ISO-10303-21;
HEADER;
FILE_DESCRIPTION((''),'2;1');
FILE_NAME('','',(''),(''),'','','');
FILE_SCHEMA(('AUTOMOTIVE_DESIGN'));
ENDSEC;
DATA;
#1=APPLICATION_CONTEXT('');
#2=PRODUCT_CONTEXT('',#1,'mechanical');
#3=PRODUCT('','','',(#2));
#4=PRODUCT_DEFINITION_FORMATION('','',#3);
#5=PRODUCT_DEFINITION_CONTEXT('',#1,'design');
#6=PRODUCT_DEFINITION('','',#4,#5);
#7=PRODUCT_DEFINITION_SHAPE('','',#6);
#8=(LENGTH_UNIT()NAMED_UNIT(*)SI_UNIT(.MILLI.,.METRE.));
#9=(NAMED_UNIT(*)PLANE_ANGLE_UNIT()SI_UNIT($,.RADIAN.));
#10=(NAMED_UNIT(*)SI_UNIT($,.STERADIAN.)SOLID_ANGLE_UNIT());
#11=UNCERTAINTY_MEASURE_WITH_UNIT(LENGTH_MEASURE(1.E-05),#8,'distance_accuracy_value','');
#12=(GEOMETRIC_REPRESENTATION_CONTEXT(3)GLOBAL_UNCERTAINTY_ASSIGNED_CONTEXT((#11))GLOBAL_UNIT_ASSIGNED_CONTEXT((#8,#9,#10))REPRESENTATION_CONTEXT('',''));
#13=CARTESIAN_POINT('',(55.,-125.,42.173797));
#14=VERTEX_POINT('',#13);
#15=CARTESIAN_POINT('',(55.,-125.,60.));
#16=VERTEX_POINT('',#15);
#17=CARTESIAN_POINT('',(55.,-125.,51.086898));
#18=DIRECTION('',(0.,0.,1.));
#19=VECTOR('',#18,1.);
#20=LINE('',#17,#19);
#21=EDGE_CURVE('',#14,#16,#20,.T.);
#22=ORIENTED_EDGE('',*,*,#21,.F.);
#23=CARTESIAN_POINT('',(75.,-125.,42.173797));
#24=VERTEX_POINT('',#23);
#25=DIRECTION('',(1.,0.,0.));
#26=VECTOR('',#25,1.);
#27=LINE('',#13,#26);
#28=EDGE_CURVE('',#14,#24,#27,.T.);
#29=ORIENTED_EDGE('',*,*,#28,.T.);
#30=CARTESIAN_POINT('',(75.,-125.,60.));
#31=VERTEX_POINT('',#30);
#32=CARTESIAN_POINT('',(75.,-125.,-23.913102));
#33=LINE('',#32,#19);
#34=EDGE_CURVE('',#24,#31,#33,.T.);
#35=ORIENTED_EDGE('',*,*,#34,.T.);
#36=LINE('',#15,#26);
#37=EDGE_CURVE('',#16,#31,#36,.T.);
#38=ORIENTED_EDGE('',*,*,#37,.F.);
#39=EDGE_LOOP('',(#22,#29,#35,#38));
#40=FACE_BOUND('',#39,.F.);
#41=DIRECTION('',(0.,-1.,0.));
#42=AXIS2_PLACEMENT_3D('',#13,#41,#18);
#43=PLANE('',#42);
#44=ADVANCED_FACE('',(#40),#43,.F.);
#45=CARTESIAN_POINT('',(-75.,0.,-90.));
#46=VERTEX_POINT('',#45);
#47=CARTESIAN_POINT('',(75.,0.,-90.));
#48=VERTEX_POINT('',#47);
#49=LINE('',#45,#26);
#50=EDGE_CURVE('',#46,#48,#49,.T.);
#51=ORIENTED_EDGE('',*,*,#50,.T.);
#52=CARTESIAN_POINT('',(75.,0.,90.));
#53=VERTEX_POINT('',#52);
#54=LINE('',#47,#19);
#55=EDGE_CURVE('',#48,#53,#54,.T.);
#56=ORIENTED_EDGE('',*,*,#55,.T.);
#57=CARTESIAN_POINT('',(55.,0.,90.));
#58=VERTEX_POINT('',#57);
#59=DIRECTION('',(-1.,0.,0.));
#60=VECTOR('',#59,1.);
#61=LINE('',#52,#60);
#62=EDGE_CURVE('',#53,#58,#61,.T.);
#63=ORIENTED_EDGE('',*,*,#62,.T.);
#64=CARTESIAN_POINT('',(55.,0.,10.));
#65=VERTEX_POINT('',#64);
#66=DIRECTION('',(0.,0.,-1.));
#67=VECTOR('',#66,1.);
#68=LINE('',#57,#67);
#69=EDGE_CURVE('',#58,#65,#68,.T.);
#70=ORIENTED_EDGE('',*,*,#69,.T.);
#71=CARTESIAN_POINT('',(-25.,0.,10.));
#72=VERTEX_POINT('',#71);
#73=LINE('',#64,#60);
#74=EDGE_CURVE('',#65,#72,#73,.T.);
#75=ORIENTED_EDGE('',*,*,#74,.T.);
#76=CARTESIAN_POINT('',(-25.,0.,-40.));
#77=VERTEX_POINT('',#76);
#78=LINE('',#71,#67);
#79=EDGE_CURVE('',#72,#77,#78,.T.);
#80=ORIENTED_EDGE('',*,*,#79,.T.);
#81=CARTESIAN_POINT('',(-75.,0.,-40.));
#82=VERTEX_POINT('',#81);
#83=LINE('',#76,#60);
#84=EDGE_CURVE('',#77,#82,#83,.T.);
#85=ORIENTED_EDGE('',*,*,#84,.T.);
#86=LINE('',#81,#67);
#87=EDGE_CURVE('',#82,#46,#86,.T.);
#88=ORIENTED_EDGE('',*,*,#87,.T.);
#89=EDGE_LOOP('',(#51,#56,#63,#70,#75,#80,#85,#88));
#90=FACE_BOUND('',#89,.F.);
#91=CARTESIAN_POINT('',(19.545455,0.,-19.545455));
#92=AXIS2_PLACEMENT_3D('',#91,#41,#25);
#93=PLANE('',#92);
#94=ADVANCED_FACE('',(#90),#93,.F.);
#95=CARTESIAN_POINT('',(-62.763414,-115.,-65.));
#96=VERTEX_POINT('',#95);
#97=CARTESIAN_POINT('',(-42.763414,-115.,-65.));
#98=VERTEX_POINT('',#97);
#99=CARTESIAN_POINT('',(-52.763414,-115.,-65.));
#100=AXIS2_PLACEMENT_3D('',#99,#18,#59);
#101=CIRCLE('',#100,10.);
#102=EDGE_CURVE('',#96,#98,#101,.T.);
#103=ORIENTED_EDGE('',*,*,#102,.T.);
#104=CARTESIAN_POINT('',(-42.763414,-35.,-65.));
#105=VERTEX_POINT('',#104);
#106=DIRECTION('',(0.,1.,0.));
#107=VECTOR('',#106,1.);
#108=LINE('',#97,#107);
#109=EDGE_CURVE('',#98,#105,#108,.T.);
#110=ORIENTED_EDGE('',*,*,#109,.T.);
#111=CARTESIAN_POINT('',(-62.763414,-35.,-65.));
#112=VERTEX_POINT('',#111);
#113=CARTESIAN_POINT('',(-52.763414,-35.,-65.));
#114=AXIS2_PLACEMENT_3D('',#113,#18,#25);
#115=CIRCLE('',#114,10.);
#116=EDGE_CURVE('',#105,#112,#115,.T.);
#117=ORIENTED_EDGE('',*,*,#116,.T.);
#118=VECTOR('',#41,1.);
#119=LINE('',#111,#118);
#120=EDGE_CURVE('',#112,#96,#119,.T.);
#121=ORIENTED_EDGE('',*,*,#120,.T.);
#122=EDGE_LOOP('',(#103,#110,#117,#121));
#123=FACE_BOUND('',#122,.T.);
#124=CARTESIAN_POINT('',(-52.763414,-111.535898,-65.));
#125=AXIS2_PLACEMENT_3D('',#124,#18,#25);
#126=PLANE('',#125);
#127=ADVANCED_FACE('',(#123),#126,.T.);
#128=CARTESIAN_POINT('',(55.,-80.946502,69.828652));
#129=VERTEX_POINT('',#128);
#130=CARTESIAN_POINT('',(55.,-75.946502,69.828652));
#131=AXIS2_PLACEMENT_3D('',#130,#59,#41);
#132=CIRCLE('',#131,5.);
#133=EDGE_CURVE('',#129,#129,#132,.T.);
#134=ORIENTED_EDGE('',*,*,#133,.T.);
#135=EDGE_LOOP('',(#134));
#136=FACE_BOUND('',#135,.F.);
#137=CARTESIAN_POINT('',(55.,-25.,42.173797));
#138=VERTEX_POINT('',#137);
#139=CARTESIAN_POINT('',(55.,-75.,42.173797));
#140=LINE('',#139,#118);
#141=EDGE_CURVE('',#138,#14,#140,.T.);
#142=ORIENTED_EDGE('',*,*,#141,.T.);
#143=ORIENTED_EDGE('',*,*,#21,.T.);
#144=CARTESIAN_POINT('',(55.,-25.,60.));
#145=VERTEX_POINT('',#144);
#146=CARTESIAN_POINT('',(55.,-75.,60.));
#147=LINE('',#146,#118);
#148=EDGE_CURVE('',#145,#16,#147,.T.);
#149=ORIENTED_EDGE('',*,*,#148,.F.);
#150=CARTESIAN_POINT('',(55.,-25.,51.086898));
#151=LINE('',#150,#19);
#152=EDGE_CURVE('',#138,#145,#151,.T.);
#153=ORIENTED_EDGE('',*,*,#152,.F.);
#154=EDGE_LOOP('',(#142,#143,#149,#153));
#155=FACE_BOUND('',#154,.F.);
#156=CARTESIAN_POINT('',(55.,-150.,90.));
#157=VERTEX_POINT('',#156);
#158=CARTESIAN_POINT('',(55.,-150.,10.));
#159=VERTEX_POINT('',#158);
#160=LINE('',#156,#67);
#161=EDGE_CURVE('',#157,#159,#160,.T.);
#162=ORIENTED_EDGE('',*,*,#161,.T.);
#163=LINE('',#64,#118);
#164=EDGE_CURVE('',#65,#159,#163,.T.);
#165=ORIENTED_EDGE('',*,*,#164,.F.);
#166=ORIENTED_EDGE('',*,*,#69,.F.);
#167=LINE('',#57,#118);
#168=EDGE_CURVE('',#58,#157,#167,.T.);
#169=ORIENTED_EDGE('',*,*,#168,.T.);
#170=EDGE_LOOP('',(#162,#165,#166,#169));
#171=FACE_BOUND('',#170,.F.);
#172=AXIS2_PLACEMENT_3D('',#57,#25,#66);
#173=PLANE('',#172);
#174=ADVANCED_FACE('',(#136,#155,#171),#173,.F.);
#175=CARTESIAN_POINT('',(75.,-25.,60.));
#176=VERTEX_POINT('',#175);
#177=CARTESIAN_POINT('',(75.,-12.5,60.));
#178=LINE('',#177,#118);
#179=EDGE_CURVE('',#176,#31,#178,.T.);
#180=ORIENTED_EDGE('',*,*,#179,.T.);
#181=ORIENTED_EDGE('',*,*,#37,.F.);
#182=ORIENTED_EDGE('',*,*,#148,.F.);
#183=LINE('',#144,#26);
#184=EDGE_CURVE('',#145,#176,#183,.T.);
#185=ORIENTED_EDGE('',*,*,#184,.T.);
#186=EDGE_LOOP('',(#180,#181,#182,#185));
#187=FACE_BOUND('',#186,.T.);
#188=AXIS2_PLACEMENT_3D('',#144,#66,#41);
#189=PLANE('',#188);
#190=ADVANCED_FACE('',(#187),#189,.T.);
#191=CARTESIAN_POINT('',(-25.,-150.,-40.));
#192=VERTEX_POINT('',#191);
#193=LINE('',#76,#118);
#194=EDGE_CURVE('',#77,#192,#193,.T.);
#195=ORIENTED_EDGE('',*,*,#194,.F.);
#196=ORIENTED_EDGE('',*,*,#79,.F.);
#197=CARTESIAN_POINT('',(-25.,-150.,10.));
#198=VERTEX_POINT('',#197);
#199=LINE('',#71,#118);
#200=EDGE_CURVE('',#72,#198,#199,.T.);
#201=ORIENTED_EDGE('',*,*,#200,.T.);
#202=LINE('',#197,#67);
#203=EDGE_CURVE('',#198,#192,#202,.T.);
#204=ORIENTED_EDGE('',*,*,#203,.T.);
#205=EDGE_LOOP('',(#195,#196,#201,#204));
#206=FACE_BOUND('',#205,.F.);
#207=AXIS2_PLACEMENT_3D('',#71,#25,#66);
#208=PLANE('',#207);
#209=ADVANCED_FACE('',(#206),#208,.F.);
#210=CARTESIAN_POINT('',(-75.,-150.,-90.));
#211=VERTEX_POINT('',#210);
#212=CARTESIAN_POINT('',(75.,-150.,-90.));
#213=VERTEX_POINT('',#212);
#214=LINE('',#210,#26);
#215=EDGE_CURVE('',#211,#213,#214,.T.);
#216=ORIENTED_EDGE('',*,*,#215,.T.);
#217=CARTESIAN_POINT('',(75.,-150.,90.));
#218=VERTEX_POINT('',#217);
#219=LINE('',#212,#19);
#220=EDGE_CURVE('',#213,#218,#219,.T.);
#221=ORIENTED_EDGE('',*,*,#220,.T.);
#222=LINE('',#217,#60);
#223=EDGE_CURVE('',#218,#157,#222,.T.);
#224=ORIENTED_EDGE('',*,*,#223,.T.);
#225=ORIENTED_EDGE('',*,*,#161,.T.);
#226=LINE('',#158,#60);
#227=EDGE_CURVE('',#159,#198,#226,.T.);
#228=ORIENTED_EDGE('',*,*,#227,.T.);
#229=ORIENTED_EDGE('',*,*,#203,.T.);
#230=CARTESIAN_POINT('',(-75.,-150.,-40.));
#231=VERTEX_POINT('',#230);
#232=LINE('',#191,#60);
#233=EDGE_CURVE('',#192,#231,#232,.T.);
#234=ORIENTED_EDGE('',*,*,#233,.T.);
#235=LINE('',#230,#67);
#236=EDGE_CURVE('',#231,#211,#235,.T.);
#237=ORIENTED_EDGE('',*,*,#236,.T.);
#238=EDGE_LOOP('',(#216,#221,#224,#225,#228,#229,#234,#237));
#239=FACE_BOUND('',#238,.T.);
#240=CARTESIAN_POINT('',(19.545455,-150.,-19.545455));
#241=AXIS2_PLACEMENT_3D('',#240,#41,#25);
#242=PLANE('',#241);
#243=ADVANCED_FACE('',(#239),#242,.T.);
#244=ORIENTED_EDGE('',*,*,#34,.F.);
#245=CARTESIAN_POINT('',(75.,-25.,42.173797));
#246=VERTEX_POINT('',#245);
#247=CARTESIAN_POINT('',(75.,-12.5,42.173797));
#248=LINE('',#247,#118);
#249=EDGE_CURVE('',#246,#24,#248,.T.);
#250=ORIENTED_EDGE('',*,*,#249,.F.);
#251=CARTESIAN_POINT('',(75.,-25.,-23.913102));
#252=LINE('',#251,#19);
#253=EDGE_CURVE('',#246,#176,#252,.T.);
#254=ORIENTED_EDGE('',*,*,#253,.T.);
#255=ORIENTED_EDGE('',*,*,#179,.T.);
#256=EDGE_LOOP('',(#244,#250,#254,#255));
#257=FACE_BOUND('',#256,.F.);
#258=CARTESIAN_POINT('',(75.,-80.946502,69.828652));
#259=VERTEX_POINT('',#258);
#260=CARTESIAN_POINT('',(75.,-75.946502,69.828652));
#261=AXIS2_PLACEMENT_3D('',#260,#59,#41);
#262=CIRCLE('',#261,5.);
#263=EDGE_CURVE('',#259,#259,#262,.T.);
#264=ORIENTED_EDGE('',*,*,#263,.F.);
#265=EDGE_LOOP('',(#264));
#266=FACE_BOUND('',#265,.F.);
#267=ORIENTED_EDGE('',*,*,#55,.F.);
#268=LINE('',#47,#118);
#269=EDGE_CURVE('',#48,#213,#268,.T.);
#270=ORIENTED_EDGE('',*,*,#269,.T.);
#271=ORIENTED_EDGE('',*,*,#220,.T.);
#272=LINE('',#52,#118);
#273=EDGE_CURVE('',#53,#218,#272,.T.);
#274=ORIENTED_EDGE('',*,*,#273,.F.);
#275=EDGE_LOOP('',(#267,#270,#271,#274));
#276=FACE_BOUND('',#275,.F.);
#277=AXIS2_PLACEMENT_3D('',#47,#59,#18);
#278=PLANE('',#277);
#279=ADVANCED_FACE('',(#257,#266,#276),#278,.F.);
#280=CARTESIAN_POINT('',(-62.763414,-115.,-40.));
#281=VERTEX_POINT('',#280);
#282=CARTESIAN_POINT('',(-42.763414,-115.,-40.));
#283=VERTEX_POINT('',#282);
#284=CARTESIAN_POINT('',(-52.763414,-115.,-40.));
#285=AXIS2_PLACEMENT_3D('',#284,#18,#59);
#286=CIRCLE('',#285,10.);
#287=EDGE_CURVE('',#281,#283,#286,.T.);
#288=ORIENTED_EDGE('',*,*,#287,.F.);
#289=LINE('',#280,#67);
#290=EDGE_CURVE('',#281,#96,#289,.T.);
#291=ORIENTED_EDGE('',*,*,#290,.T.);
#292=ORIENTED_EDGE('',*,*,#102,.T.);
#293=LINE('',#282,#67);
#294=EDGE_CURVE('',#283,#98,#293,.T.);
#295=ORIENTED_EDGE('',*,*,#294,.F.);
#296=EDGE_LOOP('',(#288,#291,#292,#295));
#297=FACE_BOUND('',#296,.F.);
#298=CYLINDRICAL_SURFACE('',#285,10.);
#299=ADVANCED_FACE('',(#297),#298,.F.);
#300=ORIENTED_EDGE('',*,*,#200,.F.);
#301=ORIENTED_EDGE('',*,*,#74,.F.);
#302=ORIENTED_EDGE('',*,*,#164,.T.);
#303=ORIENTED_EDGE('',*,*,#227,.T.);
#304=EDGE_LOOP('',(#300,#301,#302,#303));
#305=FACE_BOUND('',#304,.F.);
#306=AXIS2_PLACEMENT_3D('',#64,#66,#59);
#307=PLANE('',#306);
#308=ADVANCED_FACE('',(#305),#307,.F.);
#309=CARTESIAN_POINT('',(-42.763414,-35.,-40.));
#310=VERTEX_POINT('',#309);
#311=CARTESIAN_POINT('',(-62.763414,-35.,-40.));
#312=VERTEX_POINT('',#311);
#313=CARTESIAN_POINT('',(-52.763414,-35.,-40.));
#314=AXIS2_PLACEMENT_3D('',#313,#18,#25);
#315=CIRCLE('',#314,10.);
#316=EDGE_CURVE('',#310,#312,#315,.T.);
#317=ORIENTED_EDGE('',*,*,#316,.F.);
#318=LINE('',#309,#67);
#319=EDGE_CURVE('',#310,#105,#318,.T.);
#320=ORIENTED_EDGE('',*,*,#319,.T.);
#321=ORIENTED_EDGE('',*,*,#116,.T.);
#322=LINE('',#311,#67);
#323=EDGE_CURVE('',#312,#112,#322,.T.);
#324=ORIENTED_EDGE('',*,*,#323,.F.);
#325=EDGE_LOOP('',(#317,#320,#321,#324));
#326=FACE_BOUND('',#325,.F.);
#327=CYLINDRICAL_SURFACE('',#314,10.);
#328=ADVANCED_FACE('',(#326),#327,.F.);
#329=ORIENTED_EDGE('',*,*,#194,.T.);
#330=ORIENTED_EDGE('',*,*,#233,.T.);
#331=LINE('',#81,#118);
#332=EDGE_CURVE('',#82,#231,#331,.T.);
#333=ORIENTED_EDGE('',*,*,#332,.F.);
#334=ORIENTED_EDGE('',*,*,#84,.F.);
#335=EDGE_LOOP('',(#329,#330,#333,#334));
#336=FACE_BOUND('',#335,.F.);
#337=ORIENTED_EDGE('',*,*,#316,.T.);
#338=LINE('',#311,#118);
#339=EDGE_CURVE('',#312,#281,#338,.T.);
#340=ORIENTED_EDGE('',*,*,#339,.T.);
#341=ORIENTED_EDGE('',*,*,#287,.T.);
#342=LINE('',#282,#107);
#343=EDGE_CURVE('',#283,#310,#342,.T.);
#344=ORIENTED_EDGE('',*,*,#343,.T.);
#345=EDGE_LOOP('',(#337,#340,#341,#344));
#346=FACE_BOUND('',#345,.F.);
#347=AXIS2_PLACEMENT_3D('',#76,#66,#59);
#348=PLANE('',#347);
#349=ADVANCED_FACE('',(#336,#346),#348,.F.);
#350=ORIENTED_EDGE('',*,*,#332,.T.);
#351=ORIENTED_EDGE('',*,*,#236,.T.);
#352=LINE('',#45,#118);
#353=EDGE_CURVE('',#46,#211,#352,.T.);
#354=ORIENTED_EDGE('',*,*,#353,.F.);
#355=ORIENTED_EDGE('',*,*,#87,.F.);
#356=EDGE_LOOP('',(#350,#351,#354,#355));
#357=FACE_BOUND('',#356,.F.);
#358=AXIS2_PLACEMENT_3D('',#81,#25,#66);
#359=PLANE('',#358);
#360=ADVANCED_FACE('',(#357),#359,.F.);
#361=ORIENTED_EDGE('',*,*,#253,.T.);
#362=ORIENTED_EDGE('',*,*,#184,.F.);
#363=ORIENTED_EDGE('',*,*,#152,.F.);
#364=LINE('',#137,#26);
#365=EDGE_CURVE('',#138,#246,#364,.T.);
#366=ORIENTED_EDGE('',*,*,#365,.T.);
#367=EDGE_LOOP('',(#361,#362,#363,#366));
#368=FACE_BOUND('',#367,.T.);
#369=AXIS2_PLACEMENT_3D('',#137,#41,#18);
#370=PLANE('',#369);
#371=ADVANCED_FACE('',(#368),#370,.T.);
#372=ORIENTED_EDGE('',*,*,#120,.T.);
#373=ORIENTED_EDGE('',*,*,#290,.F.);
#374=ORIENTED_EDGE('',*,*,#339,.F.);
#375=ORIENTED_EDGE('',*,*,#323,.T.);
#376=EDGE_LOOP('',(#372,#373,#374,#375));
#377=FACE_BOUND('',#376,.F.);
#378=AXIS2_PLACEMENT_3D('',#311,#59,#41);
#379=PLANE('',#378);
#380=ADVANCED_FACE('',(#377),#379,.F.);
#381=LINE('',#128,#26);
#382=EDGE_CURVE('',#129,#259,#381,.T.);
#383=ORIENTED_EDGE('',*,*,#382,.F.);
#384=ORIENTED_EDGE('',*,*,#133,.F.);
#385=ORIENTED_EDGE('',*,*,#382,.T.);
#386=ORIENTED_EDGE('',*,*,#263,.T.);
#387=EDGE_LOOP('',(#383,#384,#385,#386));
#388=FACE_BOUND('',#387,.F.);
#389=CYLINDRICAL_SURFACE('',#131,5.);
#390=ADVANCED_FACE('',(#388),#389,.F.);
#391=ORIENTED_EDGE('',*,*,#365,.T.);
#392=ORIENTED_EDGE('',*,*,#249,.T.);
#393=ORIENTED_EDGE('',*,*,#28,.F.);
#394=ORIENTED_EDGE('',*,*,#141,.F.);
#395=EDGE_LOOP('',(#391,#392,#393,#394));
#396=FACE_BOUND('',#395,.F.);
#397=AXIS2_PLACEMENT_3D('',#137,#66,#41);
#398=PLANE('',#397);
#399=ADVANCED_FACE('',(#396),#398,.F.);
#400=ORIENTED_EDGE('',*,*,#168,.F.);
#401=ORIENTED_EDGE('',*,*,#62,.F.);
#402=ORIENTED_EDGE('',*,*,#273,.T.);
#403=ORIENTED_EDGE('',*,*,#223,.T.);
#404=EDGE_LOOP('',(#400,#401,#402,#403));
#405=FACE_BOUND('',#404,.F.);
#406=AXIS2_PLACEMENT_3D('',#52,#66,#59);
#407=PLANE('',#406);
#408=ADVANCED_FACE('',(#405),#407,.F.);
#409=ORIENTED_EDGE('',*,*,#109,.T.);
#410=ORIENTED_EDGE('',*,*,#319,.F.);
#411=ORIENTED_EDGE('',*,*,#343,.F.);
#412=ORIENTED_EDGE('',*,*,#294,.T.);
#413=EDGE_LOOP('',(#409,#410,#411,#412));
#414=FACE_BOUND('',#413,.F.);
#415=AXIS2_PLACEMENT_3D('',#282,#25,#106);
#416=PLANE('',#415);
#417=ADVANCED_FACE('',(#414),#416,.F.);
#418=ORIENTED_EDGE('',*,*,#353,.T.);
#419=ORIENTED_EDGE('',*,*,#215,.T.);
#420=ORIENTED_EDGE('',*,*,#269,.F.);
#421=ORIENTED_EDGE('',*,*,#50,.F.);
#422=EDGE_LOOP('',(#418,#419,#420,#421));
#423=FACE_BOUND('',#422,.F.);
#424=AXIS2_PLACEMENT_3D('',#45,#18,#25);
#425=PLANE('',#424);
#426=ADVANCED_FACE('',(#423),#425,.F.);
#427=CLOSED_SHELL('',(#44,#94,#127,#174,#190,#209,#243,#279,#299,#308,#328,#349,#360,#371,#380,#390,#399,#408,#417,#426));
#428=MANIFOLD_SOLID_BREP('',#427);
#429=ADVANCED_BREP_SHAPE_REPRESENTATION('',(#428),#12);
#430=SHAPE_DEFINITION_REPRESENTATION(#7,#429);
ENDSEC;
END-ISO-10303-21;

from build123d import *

# Parameters (mm, degrees)
F1_DEPTH = 150
F2_R     = 5
F3_DEPTH = 20.001
F4_W     = 100
F4_H     = 17.8262033769
F5_DEPTH = 20.001
F7_DEPTH = 25


with BuildPart() as f1:
    # F0 (on Front) → F1 (new body)
    with BuildSketch(Plane.XZ):
        Polygon((75, -90), (75, 90), (55, 90), (55, 10), (-25, 10), (-25, -40), (-75, -40), (-75, -90), align=None)
    extrude(amount=F1_DEPTH)

    # F2 (on face) → F3 (cut, through all)
    with BuildSketch(Plane(origin=(55, 0, 0), x_dir=(0, -1, 0), z_dir=(-1, 0, 0))):
        with Locations((75.9465023875, 69.8286518455)):
            Circle(F2_R)
    extrude(amount=-F3_DEPTH, mode=Mode.SUBTRACT)

    # F4 (on face) → F5 (cut, through all)
    with BuildSketch(Plane(origin=(55, 0, 0), x_dir=(0, -1, 0), z_dir=(-1, 0, 0))):
        with Locations((75, 51.0868983116)):
            Rectangle(F4_W, F4_H)
    extrude(amount=-F5_DEPTH, mode=Mode.SUBTRACT)

    # F6 (on face) → F7 (cut)
    with BuildSketch(Plane.XY.offset(-40)):
        with BuildLine():
            ThreePointArc((-42.7634136379, -115), (-52.7634136379, -105), (-62.7634136379, -115))
            Line((-62.7634136379, -115), (-42.7634136379, -115))
        make_face()
        with BuildLine():
            Line((-62.7634136379, -35), (-62.7634136379, -115))
            ThreePointArc((-62.7634136379, -115), (-52.7634136379, -105), (-42.7634136379, -115))
            Line((-42.7634136379, -115), (-42.7634136379, -35))
            ThreePointArc((-42.7634136379, -35), (-52.7634136379, -45), (-62.7634136379, -35))
        make_face()
        with BuildLine():
            Line((-42.7634136379, -115), (-62.7634136379, -115))
            ThreePointArc((-62.7634136379, -115), (-52.7634136379, -125), (-42.7634136379, -115))
        make_face()
        with BuildLine():
            ThreePointArc((-42.7634136379, -35), (-52.7634136379, -25), (-62.7634136379, -35))
            Line((-62.7634136379, -35), (-42.7634136379, -35))
        make_face()
        with BuildLine():
            Line((-42.7634136379, -35), (-62.7634136379, -35))
            ThreePointArc((-62.7634136379, -35), (-52.7634136379, -45), (-42.7634136379, -35))
        make_face()
    extrude(amount=-F7_DEPTH, mode=Mode.SUBTRACT)


solid = f1.part
